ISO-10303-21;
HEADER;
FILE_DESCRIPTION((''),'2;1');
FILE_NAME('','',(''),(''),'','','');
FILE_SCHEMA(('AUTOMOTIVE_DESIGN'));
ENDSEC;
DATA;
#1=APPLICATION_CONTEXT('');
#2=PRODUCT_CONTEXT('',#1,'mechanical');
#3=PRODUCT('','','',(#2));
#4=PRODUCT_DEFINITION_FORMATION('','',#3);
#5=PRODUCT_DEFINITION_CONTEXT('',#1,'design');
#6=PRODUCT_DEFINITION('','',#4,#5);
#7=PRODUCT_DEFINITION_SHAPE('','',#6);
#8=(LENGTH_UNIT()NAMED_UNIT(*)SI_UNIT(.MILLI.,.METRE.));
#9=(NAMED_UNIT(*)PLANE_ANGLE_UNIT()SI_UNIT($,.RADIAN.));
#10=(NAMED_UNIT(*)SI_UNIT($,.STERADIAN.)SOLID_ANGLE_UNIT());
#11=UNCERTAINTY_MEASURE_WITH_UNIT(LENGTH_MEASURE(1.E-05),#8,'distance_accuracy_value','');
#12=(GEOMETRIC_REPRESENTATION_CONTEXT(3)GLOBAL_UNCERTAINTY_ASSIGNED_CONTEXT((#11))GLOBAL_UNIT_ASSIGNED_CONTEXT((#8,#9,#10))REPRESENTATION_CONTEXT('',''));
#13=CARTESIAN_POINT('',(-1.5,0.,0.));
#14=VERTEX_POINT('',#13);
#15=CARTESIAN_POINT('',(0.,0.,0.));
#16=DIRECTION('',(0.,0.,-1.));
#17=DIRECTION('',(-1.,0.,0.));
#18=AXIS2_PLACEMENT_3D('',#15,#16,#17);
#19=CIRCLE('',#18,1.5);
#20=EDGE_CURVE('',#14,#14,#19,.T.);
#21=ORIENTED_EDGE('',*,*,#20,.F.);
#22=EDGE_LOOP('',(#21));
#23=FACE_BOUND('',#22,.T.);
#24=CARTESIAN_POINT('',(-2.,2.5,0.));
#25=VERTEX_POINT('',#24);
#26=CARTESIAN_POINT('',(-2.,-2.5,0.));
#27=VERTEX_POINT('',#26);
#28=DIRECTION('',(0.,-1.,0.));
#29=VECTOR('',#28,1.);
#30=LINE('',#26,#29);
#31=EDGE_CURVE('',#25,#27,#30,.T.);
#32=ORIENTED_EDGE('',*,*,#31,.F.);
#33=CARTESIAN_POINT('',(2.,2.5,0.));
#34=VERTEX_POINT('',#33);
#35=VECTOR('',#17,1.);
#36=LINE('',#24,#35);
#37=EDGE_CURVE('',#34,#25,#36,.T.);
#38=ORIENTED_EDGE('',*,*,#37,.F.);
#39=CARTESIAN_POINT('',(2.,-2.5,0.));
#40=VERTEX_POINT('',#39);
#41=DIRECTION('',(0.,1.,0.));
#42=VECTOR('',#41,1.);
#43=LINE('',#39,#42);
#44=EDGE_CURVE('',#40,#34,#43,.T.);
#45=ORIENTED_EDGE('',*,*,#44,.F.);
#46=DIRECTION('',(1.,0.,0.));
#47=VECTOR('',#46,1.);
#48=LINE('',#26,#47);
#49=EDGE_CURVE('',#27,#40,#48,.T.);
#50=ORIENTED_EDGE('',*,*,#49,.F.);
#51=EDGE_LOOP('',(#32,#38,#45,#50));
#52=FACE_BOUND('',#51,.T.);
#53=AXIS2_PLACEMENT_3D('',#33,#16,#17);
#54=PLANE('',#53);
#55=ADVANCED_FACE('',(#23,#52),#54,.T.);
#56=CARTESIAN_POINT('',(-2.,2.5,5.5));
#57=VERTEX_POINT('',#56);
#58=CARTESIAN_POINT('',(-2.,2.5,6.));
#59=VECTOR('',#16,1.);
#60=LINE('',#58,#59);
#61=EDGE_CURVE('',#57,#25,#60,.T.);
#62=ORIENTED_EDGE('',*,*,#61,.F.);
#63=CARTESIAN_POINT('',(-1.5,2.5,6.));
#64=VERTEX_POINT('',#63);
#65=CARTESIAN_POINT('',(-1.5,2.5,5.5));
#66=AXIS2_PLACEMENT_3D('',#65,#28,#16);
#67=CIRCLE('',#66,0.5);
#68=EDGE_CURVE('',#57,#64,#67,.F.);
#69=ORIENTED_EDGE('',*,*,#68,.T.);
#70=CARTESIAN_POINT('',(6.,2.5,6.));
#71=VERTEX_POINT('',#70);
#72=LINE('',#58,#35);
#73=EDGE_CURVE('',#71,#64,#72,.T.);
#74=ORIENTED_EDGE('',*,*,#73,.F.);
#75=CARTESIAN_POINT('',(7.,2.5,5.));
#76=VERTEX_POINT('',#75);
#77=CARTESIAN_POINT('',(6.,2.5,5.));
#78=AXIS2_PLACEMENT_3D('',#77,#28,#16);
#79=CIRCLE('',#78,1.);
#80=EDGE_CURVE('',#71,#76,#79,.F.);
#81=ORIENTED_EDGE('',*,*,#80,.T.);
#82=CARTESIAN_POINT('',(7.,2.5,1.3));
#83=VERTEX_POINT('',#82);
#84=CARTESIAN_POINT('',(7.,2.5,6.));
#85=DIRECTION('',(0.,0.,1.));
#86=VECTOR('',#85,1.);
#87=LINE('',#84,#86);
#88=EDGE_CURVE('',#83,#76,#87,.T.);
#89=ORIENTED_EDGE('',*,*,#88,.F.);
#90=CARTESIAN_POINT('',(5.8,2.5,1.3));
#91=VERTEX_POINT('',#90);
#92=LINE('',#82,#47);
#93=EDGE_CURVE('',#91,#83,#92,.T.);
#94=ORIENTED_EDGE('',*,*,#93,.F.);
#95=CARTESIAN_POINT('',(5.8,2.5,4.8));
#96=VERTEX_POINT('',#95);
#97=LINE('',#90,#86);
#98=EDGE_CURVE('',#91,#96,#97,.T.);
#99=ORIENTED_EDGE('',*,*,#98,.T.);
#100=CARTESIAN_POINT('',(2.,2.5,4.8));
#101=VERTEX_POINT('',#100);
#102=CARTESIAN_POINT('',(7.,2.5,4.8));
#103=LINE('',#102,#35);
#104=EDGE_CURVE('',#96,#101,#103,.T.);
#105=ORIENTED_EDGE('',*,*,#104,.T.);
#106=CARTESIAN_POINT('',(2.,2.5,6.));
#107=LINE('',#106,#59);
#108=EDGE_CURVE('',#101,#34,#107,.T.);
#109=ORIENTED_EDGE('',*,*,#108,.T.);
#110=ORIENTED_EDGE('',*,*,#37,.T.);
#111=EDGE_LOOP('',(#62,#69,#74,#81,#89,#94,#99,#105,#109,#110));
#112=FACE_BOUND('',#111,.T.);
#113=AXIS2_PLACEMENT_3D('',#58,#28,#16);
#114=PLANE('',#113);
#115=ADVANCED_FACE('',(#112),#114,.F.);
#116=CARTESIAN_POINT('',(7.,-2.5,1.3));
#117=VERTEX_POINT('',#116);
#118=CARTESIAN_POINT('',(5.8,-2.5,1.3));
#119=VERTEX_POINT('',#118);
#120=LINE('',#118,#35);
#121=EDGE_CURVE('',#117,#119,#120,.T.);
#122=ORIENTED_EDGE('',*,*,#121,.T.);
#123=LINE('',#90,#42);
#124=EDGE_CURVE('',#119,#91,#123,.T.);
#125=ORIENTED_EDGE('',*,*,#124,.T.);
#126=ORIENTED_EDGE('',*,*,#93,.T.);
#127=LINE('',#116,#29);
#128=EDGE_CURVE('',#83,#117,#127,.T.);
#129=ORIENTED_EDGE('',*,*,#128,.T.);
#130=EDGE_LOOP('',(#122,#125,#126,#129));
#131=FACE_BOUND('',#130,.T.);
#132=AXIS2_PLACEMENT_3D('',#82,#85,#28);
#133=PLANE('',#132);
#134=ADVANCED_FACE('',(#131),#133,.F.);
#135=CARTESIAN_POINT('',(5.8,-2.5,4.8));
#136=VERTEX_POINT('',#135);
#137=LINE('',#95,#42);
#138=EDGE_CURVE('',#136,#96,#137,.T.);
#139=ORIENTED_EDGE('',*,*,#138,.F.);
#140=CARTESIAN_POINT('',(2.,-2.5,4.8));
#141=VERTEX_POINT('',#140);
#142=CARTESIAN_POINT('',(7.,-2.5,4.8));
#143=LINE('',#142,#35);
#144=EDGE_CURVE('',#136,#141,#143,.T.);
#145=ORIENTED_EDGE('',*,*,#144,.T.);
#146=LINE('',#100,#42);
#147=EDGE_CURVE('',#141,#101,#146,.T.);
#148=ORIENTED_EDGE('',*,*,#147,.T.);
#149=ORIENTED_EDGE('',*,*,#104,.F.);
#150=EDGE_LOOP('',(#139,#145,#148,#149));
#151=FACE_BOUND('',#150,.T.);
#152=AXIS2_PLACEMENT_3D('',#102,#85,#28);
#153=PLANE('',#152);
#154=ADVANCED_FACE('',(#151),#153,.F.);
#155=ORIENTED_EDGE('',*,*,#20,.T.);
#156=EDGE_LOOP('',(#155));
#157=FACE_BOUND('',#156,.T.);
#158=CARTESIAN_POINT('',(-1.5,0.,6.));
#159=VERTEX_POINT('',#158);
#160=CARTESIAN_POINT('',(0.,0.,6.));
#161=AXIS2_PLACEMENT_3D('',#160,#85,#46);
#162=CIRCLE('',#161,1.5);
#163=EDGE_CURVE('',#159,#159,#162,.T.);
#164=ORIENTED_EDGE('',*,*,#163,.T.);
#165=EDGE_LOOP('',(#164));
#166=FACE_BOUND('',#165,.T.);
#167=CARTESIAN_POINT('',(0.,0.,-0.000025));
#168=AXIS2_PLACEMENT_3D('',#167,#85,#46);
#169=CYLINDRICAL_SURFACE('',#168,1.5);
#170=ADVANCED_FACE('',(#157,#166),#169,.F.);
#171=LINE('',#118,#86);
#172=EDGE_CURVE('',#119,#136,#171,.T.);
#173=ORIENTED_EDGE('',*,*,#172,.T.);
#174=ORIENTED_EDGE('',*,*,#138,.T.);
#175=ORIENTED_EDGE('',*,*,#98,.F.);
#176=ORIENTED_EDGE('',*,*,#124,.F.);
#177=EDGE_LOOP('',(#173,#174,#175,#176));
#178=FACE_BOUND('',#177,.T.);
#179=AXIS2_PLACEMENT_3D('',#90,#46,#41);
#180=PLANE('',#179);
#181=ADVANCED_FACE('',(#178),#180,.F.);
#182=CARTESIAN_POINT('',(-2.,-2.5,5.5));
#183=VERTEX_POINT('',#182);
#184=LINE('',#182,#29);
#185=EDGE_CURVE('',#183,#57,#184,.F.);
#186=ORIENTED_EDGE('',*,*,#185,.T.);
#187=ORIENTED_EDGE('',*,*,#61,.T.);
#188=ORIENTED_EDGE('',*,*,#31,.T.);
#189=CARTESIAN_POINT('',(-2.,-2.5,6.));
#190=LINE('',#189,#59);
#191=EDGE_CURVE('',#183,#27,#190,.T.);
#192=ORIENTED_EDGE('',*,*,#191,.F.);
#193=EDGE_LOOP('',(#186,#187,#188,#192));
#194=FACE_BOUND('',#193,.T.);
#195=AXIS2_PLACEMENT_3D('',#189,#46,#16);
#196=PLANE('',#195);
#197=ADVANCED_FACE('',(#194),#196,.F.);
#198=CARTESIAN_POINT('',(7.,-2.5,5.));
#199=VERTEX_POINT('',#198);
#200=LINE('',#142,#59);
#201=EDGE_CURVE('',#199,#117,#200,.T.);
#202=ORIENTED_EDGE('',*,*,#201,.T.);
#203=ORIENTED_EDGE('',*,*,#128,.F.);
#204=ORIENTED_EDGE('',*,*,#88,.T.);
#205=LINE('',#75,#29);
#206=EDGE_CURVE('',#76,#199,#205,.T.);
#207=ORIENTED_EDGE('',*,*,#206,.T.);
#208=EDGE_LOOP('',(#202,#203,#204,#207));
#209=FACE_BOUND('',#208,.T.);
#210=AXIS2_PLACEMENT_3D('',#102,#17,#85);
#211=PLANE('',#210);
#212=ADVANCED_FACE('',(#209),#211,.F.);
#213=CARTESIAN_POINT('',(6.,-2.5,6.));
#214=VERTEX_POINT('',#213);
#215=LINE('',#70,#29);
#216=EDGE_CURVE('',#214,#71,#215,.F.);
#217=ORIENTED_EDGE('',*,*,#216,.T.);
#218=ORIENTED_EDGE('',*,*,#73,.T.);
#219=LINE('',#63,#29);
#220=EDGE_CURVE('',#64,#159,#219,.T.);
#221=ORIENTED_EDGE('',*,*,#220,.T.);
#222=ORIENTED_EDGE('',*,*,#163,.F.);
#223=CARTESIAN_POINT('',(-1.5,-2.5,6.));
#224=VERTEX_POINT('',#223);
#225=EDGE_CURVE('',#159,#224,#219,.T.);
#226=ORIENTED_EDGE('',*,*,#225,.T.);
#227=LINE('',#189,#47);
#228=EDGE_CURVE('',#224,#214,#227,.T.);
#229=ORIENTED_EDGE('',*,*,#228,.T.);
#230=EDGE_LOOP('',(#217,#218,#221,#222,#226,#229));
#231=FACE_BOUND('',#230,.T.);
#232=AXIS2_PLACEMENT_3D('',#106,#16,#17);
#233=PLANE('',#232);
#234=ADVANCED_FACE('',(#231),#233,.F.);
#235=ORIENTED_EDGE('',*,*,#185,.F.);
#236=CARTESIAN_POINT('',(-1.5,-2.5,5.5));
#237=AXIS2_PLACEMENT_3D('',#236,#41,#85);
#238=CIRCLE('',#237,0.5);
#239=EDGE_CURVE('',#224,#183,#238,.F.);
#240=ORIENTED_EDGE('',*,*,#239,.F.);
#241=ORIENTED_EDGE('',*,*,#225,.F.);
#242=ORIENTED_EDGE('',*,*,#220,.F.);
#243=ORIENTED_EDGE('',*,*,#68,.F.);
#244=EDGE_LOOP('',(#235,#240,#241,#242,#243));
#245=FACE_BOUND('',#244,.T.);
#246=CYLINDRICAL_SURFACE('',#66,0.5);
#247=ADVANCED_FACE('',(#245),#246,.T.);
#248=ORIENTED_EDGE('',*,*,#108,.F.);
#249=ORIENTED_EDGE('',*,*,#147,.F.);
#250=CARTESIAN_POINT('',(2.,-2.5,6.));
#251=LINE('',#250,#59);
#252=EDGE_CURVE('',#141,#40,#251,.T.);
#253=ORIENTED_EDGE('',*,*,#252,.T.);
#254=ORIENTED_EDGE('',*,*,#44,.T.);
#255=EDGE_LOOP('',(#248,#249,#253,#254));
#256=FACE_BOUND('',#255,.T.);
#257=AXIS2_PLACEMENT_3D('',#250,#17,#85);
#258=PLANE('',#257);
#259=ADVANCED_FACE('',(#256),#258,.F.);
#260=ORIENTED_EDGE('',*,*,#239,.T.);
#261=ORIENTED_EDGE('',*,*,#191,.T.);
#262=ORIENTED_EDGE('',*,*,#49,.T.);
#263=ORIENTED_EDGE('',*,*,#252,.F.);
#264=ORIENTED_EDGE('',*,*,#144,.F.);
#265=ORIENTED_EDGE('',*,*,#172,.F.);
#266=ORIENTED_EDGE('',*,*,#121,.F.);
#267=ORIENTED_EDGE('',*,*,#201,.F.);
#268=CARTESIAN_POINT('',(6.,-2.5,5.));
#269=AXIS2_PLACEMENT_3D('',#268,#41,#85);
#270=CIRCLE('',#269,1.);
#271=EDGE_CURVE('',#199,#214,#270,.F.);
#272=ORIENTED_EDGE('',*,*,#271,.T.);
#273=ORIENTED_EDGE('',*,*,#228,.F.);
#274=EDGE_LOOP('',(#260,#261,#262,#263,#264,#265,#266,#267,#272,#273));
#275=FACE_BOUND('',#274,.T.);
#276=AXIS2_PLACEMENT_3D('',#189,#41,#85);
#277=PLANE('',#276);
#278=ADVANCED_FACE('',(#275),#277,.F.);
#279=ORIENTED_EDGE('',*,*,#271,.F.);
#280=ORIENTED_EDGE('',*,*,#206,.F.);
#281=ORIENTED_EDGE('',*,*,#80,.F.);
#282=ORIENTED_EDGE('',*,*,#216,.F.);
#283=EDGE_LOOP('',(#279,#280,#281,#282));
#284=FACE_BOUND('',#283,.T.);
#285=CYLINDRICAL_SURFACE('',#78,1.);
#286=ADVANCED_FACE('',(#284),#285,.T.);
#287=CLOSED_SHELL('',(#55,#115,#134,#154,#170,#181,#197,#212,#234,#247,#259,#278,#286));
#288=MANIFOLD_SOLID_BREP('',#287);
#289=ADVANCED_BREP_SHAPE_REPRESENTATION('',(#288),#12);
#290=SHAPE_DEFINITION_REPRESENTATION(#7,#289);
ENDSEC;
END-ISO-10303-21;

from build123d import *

# Parameters (mm, degrees)
SKETCH_1_W          = 4
SKETCH_1_H          = 5
EXTRUDE_1_DEPTH     = 6
SKETCH_4_W          = 1.2
SKETCH_4_H          = 5
EXTRUDE_2_DEPTH     = 5
SKETCH_5_W          = 1.2
SKETCH_5_H          = 5
EXTRUDE_3_DEPTH     = 3.5
FILLET_1_R          = 1
SKETCH_6_R          = 1.5
CUT_EXTRUDE_1_DEPTH = 10.552486587
FILLET_2_R          = 0.5


with BuildPart() as part:
    # 草图1 → 凸台-拉伸1 (new body)
    with BuildSketch(Plane.XY):
        Rectangle(SKETCH_1_W, SKETCH_1_H)
    extrude(amount=EXTRUDE_1_DEPTH)

    # 草图4 → 凸台-拉伸2 (add)
    with BuildSketch(Plane(origin=(2, 0, 0), x_dir=(0, 0, -1), z_dir=(1, 0, 0))):
        with Locations((-5.4, 0)):
            Rectangle(SKETCH_4_W, SKETCH_4_H)
    extrude(amount=EXTRUDE_2_DEPTH)

    # 草图5 → 凸台-拉伸3 (add)
    with BuildSketch(Plane(origin=(0, 0, 4.8), x_dir=(-1, 0, 0), z_dir=(0, 0, -1))):
        with Locations((-6.4, 0)):
            Rectangle(SKETCH_5_W, SKETCH_5_H)
    extrude(amount=EXTRUDE_3_DEPTH)

    # 圆角1
    fillet_1_edges = [part.edges().sort_by_distance(p)[0] for p in [
        (7, 0, 6),
    ]]
    fillet(fillet_1_edges, radius=FILLET_1_R)

    # 草图6 → 切除-拉伸1 (cut, through all)
    with BuildSketch(Plane.XY.offset(6)):
        Circle(SKETCH_6_R)
    extrude(amount=-CUT_EXTRUDE_1_DEPTH, mode=Mode.SUBTRACT)

    # 圆角2
    fillet_2_edges = [part.edges().sort_by_distance(p)[0] for p in [
        (-2, 0, 6),
    ]]
    fillet(fillet_2_edges, radius=FILLET_2_R - 0.0001)  # a hair under: the kernel refuses the full size


solid = part.part
